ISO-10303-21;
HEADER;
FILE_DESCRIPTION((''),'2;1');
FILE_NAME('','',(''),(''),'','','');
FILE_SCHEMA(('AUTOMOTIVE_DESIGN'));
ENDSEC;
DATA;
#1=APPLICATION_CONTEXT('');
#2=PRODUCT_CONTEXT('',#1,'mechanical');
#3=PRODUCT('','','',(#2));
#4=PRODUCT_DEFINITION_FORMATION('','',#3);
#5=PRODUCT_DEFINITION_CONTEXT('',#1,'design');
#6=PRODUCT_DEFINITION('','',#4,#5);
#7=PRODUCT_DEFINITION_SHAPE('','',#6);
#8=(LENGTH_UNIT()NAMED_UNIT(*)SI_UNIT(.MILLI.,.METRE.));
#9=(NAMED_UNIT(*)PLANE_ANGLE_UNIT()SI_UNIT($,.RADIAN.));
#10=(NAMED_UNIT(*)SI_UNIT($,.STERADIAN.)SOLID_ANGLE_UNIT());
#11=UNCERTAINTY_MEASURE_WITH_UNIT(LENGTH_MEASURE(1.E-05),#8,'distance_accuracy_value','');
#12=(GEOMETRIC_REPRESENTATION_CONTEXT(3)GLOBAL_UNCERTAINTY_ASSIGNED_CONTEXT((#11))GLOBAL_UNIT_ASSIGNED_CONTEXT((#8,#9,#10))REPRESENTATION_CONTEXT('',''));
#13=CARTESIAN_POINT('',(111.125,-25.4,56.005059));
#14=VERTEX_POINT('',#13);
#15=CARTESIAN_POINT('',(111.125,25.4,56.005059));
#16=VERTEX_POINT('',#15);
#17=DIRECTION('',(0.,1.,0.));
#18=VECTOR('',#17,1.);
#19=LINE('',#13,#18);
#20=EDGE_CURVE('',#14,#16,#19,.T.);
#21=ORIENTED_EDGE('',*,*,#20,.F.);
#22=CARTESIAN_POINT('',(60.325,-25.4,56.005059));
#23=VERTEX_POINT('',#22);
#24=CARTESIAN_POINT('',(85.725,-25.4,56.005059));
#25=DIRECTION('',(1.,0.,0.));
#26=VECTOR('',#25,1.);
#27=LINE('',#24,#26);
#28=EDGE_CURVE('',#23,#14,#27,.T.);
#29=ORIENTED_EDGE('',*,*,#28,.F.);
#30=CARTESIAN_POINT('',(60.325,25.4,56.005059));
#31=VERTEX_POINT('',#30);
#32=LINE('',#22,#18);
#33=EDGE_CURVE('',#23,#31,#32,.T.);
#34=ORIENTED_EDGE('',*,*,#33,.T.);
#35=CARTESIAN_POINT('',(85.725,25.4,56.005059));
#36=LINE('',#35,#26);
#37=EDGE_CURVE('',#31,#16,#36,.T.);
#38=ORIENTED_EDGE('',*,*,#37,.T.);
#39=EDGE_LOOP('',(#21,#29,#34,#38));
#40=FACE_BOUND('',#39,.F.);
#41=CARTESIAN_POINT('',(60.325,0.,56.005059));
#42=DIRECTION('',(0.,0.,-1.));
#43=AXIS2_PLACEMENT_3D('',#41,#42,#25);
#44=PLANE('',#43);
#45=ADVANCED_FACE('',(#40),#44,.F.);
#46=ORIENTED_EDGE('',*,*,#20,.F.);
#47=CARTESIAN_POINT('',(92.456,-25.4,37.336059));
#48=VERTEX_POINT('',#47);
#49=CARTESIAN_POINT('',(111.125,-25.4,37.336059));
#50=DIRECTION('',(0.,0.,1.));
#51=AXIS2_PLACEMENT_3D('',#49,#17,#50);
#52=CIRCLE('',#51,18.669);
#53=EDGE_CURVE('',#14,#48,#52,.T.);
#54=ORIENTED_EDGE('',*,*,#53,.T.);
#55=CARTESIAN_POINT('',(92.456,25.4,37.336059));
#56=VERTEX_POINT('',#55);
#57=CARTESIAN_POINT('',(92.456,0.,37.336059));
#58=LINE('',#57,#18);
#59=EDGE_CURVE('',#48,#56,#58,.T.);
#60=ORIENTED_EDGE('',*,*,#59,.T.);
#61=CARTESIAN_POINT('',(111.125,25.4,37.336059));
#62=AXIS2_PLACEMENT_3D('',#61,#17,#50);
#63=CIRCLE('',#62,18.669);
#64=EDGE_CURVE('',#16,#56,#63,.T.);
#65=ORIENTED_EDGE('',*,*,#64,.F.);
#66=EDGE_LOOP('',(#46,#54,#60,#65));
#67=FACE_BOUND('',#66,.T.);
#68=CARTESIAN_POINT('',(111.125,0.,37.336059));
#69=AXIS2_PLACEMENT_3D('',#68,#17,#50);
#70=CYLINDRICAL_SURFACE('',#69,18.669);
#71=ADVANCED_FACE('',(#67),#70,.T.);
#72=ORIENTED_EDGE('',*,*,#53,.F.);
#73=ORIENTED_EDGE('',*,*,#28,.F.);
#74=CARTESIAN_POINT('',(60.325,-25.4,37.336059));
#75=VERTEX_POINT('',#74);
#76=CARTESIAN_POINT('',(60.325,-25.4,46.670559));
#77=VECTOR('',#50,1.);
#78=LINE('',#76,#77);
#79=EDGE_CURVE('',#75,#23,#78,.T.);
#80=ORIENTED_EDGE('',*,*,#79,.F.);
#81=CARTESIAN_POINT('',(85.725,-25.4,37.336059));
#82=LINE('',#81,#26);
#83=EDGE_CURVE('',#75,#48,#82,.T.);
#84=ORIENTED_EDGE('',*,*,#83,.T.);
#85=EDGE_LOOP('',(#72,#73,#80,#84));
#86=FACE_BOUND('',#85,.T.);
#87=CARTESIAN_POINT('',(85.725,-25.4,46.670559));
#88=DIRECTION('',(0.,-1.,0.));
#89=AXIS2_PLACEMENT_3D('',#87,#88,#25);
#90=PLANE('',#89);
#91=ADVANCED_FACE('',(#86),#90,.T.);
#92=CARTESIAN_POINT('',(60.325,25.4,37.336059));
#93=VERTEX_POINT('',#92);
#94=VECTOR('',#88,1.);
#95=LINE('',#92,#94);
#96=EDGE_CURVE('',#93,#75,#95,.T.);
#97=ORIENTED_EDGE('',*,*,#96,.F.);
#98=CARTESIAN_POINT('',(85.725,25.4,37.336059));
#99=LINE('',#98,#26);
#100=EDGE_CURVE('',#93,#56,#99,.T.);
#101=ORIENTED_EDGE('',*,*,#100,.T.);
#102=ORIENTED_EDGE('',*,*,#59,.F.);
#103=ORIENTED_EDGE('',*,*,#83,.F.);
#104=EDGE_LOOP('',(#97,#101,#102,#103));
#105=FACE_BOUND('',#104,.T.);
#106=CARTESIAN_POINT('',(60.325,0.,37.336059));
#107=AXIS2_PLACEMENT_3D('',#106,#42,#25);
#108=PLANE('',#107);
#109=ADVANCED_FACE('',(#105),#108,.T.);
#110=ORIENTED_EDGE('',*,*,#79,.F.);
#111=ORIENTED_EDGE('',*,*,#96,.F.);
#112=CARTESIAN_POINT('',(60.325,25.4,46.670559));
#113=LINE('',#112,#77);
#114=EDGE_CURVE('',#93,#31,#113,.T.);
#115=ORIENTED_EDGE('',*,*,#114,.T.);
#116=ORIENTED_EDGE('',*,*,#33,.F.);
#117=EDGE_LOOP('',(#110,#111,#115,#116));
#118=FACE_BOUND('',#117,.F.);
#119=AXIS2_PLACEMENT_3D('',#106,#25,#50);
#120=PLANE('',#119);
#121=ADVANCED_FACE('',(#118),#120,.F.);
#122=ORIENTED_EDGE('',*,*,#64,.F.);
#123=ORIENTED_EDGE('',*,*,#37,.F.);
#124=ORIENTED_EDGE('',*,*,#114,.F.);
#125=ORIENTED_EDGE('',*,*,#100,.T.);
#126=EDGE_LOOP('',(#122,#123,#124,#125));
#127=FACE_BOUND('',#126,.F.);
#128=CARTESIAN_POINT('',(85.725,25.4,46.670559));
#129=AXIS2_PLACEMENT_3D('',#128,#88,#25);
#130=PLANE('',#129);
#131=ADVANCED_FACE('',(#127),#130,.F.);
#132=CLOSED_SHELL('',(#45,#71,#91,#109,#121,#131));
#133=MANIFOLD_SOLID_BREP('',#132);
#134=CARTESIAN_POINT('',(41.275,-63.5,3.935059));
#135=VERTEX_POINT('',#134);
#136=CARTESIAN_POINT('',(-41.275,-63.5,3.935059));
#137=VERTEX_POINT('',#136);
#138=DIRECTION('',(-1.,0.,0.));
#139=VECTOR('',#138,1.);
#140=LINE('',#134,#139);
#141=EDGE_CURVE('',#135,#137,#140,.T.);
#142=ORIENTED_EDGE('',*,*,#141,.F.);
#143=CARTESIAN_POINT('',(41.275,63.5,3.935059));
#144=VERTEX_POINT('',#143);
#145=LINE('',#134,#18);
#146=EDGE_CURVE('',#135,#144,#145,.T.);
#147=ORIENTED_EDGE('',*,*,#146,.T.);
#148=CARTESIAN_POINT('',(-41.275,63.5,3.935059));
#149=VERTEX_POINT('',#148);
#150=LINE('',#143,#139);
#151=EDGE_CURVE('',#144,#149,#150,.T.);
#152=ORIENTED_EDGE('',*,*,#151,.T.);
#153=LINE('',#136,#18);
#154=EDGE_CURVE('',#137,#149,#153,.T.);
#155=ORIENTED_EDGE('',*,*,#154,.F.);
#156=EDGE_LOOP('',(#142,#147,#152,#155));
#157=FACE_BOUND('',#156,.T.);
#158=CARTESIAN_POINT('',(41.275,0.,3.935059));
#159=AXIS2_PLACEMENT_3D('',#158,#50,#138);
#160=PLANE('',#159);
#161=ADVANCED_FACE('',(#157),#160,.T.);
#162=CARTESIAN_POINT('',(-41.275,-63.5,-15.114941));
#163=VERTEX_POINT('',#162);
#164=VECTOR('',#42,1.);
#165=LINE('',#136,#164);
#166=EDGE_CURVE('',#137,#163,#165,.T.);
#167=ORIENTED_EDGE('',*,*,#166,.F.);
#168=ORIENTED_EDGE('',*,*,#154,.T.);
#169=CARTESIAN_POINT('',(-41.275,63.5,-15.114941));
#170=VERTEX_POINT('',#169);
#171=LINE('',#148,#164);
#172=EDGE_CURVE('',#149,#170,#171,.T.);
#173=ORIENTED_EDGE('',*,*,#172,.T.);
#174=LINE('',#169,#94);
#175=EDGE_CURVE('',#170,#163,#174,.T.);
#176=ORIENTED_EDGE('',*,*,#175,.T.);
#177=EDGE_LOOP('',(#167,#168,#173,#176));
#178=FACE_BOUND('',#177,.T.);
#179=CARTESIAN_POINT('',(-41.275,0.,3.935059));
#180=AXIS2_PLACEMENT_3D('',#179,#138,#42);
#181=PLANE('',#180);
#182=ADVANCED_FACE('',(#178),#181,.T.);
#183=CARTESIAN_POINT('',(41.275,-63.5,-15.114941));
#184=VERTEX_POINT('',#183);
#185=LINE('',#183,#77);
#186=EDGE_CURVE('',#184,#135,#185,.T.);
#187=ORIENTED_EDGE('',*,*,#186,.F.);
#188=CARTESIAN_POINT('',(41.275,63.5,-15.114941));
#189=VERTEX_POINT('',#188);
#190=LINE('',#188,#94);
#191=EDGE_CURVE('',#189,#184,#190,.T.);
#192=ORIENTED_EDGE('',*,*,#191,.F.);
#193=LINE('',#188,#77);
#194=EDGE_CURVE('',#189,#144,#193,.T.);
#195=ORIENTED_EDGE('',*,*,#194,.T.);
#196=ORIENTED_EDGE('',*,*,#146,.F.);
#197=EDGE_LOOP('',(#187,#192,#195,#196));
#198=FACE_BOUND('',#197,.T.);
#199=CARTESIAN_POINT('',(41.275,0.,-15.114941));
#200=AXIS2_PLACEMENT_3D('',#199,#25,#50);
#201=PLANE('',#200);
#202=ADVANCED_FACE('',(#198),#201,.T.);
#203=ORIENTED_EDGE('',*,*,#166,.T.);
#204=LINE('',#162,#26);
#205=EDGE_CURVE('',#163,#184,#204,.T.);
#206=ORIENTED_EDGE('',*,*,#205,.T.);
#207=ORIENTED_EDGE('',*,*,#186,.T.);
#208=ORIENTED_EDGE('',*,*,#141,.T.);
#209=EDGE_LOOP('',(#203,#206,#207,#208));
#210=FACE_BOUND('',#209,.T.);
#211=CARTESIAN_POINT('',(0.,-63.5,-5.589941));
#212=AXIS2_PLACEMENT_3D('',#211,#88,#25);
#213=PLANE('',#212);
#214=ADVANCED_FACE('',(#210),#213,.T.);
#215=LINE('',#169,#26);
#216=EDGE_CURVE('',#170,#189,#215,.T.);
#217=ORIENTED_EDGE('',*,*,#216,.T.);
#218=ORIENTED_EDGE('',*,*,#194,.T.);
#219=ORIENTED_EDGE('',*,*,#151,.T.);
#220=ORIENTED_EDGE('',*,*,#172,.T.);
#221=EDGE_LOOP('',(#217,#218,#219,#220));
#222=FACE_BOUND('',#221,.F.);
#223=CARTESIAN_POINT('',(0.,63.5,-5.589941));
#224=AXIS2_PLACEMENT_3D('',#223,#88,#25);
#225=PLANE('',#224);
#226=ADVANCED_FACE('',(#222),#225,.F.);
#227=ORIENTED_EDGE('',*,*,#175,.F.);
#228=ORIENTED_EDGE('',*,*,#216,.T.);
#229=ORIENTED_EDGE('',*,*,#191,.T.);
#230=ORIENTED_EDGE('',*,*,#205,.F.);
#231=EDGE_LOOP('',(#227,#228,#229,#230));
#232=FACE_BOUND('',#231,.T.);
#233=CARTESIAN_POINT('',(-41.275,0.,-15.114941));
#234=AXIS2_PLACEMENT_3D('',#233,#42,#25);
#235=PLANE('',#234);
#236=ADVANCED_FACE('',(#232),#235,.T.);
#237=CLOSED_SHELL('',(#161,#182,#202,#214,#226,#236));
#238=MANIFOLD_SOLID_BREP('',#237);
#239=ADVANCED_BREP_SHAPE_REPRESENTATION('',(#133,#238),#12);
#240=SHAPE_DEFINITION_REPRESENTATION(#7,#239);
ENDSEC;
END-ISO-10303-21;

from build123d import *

# Parameters (mm, degrees)
F1_DEPTH  = 63.5
F0_W      = 50.8
F0_H      = 18.669
F2_DEPTH  = 25.4
F2_FACE_W = 50.8
F2_FACE_H = 18.669


with BuildPart() as f1:
    # F0 (on Front) → F1 (new body, symmetric)
    with BuildSketch(Plane.XZ):
        Polygon((22.225, 3.9350592289), (-41.275, 3.9350592289), (-41.275, -15.1149407711), (41.275, -15.1149407711), (41.275, 3.9350592289), align=None)
    extrude(amount=F1_DEPTH, both=True)


with BuildPart() as f2:
    # F0 (on Front) → F2 (new body, symmetric)
    with BuildSketch(Plane.XZ):
        with Locations((85.725, 46.6705592289)):
            Rectangle(F0_W, F0_H)
    extrude(amount=F2_DEPTH, both=True)

    # F2_face (on face) → F3 (revolve)
    with BuildSketch(Plane(origin=(111.125, 0, 46.6705592289), x_dir=(0, 1, 0), z_dir=(1, 0, 0))):
        Rectangle(F2_FACE_W, F2_FACE_H)
    revolve(axis=Axis((111.125, 0, 37.3360592289), (0, 1, 0)))


solid = Compound([f1.part, f2.part])
